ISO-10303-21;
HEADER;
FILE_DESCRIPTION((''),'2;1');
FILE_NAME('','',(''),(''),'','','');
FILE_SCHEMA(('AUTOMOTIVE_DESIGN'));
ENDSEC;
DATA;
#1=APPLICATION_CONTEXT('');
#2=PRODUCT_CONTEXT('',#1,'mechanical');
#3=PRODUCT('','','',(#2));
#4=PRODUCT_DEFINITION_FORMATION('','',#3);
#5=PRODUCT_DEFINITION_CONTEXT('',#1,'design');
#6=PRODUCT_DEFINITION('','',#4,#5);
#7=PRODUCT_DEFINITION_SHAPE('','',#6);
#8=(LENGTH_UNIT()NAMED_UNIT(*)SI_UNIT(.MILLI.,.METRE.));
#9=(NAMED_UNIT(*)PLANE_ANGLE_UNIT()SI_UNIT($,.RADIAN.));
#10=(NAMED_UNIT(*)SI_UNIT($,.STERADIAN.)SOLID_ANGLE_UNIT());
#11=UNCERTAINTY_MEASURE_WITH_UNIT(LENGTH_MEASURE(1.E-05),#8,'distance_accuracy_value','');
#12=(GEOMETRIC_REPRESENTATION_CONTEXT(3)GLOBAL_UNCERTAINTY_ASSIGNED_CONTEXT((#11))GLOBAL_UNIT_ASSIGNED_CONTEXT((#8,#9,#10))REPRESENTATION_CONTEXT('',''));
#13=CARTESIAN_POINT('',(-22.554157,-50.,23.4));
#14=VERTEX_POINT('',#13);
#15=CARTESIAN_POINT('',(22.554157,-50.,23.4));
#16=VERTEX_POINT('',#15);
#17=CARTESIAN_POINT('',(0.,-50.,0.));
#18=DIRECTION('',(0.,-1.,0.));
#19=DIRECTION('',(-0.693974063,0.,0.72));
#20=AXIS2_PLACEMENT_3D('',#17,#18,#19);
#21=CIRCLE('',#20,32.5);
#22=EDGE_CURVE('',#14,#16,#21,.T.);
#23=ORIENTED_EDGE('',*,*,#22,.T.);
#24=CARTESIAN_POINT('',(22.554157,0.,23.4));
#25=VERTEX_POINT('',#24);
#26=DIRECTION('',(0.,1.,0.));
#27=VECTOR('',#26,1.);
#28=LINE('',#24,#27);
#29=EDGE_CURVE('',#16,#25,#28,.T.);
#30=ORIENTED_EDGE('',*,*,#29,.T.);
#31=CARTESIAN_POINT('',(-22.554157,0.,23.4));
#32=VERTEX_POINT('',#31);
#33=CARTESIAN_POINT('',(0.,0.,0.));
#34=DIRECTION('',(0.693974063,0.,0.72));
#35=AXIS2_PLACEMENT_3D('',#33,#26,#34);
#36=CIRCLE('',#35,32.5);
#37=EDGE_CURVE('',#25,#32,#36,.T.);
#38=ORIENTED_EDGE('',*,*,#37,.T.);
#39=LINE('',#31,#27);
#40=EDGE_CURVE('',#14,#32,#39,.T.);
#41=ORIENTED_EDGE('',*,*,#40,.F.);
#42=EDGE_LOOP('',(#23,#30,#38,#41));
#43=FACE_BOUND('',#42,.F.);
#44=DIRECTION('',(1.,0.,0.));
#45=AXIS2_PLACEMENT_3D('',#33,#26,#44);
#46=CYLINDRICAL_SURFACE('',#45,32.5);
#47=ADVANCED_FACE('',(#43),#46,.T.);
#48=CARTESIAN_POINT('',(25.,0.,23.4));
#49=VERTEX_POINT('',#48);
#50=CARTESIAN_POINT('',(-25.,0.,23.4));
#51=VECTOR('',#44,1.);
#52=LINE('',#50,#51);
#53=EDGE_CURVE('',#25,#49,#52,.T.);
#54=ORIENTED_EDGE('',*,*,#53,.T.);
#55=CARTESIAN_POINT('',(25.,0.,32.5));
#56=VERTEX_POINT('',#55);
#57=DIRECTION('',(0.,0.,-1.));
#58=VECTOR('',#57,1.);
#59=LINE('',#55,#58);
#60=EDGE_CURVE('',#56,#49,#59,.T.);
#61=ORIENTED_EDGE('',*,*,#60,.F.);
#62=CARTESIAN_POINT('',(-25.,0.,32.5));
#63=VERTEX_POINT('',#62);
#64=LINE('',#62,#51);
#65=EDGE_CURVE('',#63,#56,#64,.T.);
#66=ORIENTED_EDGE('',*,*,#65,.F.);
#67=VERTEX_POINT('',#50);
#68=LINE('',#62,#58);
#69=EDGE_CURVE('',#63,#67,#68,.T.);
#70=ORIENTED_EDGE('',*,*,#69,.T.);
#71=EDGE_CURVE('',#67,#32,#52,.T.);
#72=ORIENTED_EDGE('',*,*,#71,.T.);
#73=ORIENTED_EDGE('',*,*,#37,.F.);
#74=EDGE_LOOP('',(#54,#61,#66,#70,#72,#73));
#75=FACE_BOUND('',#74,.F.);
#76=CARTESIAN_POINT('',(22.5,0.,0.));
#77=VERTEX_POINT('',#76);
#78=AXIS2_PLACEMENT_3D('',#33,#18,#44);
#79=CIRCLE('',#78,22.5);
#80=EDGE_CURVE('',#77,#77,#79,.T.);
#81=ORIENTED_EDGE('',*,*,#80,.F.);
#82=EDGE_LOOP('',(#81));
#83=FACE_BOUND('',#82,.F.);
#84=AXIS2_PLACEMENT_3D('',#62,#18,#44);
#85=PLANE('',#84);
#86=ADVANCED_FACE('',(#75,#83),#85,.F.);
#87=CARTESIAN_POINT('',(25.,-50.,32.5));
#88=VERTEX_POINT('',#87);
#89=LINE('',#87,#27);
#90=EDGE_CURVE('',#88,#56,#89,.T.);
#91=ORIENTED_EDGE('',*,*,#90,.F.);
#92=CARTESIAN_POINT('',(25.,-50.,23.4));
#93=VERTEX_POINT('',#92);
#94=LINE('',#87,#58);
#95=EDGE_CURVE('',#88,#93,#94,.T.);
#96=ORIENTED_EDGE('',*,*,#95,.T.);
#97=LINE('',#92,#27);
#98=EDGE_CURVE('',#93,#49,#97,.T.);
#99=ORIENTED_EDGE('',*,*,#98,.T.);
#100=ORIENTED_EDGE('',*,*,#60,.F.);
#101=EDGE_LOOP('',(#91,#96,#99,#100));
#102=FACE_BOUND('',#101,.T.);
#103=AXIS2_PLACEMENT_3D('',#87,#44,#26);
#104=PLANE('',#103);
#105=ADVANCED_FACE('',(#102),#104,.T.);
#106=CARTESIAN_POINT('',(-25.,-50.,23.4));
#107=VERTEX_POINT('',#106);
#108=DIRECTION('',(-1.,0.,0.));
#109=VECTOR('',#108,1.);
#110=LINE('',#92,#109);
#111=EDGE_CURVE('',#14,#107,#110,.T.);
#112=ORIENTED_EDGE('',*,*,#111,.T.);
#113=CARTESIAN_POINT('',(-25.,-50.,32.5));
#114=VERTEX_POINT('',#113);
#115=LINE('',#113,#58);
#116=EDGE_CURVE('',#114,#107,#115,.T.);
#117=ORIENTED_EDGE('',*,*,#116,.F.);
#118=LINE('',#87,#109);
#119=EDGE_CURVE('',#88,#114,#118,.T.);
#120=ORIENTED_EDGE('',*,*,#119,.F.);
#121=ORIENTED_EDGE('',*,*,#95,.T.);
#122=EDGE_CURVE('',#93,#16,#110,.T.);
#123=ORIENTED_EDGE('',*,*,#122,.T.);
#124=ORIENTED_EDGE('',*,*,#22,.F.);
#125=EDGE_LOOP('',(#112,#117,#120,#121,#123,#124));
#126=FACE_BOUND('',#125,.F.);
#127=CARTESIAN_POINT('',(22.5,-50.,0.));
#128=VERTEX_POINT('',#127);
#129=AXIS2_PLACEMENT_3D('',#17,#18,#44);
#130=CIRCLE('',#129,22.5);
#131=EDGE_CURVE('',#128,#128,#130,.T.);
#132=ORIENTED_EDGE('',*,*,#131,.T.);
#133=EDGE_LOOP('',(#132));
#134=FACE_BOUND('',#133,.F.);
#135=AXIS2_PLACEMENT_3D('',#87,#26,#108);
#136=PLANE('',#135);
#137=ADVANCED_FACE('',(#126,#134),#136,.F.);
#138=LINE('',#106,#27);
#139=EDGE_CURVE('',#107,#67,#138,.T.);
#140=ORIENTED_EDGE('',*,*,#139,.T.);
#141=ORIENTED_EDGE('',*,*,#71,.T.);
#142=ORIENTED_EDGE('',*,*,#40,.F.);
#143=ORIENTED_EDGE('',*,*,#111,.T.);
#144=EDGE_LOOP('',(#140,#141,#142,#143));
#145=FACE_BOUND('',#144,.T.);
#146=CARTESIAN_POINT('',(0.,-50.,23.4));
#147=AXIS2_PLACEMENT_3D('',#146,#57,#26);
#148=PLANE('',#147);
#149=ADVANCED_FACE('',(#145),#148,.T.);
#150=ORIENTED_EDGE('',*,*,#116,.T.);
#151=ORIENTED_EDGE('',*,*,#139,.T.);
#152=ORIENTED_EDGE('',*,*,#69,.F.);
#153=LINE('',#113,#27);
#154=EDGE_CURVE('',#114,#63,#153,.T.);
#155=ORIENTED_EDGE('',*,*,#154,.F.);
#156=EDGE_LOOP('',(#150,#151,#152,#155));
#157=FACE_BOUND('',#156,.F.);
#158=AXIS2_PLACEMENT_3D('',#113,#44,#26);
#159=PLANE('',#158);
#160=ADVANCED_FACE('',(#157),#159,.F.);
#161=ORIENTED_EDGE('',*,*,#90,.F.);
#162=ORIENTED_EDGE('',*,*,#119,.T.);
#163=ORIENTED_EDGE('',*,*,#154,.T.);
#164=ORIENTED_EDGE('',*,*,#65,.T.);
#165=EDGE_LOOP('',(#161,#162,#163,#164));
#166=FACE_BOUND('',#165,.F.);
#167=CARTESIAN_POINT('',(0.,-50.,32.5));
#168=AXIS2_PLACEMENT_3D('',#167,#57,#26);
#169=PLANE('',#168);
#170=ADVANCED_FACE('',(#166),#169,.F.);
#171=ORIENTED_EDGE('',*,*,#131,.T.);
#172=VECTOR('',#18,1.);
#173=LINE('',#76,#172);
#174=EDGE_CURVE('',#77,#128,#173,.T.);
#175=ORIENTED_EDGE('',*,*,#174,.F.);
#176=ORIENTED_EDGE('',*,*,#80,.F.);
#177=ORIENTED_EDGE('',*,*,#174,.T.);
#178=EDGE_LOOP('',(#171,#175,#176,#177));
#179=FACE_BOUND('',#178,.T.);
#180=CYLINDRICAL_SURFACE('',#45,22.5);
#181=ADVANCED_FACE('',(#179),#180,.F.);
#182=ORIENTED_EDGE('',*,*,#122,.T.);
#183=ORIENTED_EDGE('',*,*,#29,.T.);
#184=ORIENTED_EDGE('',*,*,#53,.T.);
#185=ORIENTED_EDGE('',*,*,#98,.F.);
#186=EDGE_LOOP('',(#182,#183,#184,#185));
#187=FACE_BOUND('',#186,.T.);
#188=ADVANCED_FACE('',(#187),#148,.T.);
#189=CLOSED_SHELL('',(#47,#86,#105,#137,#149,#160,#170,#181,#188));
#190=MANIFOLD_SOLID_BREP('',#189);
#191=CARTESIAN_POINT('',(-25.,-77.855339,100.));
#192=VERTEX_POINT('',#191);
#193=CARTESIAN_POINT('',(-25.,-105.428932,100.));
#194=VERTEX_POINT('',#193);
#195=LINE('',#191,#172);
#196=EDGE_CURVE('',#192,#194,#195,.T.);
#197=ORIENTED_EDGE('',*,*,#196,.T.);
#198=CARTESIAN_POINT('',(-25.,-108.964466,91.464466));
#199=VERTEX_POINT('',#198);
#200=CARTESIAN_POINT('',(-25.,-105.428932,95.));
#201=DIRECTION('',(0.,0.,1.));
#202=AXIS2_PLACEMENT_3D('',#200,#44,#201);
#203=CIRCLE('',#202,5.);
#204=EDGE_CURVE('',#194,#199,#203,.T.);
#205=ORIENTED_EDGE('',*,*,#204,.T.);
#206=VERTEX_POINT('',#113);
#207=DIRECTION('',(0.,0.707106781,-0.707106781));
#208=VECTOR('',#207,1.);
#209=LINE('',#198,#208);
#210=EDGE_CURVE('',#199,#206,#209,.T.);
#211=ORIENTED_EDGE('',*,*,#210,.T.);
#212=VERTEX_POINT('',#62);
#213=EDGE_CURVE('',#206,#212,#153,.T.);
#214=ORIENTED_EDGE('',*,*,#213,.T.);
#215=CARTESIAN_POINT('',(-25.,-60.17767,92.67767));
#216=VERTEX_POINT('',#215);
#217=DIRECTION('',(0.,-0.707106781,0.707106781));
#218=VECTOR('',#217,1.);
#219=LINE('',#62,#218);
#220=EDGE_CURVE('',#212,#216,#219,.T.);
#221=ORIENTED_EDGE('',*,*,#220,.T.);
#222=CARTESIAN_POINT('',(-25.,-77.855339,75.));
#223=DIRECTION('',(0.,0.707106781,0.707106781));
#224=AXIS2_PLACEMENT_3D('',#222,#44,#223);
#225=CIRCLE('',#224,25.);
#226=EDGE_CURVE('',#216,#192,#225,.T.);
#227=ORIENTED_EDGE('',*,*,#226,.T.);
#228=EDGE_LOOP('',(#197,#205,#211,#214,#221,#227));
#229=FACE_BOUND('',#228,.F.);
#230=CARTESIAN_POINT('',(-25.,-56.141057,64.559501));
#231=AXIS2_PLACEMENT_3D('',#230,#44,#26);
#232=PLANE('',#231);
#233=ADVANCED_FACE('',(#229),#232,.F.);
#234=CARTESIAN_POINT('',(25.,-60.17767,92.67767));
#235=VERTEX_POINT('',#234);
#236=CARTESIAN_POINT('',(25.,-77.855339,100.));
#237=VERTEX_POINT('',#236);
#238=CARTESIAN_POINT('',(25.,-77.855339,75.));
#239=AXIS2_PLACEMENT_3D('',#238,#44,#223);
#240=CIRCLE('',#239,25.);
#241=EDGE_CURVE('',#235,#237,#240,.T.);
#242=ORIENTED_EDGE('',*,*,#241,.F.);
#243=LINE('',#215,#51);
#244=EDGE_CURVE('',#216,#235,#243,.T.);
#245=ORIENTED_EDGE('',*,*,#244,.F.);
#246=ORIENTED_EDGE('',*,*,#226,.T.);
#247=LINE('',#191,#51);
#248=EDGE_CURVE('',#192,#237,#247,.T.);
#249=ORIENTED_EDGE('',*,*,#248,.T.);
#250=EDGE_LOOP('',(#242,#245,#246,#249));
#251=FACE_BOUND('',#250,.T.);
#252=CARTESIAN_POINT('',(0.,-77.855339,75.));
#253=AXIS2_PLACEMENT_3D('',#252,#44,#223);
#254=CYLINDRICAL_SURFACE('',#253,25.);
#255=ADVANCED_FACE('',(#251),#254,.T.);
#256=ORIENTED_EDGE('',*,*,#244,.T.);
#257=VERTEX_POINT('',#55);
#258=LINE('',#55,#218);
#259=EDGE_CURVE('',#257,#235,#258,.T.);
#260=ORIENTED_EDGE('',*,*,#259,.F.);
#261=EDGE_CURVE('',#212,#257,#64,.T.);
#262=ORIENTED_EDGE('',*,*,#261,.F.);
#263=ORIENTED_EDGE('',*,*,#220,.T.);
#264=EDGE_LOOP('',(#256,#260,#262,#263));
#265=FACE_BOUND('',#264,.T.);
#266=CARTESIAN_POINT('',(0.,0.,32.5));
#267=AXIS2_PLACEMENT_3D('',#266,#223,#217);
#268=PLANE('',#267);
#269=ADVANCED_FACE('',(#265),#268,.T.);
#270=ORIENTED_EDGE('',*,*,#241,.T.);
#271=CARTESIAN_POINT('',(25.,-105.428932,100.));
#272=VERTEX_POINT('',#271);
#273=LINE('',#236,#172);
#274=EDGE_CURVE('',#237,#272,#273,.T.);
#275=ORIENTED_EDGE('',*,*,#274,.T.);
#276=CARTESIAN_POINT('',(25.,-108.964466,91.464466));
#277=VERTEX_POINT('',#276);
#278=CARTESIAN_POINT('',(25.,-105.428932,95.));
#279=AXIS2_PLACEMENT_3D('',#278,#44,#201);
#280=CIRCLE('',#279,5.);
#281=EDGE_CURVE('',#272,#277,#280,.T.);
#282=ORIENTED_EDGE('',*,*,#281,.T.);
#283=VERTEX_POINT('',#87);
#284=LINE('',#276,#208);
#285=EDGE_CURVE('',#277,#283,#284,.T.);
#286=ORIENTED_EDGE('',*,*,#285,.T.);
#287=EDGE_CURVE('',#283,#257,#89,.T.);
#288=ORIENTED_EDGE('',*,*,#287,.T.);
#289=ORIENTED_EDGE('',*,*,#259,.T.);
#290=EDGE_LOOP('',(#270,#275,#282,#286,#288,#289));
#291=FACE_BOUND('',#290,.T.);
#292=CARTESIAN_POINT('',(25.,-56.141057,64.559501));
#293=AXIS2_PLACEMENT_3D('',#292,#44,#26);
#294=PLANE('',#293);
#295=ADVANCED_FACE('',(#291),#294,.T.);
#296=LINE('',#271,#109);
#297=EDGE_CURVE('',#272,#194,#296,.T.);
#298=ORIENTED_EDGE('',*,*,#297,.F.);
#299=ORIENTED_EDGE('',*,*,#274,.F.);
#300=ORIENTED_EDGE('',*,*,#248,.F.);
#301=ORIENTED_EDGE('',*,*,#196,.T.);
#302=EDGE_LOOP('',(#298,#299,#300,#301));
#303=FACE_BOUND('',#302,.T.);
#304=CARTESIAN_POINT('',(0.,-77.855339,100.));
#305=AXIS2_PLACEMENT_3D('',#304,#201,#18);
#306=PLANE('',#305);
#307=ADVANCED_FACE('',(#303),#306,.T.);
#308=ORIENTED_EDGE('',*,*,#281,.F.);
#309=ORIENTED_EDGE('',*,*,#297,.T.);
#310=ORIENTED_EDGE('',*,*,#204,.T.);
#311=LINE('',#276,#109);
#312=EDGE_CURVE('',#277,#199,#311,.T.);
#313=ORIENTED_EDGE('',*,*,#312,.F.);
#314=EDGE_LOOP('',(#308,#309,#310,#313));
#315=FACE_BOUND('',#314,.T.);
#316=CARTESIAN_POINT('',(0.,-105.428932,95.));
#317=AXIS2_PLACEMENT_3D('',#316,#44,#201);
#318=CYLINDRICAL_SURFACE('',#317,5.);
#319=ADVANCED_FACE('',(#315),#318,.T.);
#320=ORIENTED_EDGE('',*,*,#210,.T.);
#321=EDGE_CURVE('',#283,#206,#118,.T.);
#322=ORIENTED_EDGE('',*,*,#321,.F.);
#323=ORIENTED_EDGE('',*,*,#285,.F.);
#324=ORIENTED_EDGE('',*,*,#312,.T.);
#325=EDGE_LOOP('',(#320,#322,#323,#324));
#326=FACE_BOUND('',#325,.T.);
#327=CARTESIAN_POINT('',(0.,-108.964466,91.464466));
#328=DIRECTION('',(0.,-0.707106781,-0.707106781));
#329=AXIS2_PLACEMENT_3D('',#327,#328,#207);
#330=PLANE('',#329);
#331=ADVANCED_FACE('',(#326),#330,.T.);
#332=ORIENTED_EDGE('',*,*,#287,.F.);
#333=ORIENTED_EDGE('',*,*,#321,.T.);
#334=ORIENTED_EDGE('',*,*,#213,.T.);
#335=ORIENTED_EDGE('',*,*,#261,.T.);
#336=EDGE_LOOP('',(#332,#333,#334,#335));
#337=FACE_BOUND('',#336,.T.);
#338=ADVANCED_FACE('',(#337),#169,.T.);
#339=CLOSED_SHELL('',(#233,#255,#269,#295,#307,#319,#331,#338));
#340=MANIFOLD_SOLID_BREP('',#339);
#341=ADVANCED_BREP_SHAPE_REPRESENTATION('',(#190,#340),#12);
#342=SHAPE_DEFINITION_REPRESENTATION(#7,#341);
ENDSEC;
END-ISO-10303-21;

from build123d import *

# Parameters (mm, degrees)
F0_R          = 32.5
F0_R_2        = 22.5
F1_DEPTH      = 50
F3_DEPTH      = 25
F3_DEPTH_BACK = 25
F4_DEPTH      = 9.1


with BuildPart() as f1:
    # F0 (on Front) → F1 (new body)
    with BuildSketch(Plane.XZ):
        Circle(F0_R)
        Circle(F0_R_2, mode=Mode.SUBTRACT)
    extrude(amount=F1_DEPTH)



with BuildPart() as f3:
    # F2 (on Right) → F3 (new body, two sides)
    with BuildSketch(Plane.YZ) as f3_sk:
        with BuildLine():
            Line((-50, 32.5), (0, 32.5))
            Line((0, 32.5), (-60.1776695297, 92.6776695297))
            ThreePointArc((-60.1776695297, 92.6776695297), (-68.2882532502, 98.0969883128), (-77.8553390593, 100))
            Line((-77.8553390593, 100), (-105.4289321881, 100))
            ThreePointArc((-105.4289321881, 100), (-110.0483298507, 96.9134171618), (-108.9644660941, 91.4644660941))
            Line((-108.9644660941, 91.4644660941), (-50, 32.5))
        make_face()
    extrude(amount=F3_DEPTH)
    extrude(f3_sk.sketch, amount=-F3_DEPTH_BACK)


with BuildPart() as f1_1:
    add(f1.part)
    # F4 (add): a face of the model
    f4_faces = [f3.part.faces().sort_by_distance(p)[0] for p in [
        (0, -25, 32.5),
    ]]
    extrude(f4_faces, amount=F4_DEPTH)


solid = Compound([f3.part, f1_1.part])
